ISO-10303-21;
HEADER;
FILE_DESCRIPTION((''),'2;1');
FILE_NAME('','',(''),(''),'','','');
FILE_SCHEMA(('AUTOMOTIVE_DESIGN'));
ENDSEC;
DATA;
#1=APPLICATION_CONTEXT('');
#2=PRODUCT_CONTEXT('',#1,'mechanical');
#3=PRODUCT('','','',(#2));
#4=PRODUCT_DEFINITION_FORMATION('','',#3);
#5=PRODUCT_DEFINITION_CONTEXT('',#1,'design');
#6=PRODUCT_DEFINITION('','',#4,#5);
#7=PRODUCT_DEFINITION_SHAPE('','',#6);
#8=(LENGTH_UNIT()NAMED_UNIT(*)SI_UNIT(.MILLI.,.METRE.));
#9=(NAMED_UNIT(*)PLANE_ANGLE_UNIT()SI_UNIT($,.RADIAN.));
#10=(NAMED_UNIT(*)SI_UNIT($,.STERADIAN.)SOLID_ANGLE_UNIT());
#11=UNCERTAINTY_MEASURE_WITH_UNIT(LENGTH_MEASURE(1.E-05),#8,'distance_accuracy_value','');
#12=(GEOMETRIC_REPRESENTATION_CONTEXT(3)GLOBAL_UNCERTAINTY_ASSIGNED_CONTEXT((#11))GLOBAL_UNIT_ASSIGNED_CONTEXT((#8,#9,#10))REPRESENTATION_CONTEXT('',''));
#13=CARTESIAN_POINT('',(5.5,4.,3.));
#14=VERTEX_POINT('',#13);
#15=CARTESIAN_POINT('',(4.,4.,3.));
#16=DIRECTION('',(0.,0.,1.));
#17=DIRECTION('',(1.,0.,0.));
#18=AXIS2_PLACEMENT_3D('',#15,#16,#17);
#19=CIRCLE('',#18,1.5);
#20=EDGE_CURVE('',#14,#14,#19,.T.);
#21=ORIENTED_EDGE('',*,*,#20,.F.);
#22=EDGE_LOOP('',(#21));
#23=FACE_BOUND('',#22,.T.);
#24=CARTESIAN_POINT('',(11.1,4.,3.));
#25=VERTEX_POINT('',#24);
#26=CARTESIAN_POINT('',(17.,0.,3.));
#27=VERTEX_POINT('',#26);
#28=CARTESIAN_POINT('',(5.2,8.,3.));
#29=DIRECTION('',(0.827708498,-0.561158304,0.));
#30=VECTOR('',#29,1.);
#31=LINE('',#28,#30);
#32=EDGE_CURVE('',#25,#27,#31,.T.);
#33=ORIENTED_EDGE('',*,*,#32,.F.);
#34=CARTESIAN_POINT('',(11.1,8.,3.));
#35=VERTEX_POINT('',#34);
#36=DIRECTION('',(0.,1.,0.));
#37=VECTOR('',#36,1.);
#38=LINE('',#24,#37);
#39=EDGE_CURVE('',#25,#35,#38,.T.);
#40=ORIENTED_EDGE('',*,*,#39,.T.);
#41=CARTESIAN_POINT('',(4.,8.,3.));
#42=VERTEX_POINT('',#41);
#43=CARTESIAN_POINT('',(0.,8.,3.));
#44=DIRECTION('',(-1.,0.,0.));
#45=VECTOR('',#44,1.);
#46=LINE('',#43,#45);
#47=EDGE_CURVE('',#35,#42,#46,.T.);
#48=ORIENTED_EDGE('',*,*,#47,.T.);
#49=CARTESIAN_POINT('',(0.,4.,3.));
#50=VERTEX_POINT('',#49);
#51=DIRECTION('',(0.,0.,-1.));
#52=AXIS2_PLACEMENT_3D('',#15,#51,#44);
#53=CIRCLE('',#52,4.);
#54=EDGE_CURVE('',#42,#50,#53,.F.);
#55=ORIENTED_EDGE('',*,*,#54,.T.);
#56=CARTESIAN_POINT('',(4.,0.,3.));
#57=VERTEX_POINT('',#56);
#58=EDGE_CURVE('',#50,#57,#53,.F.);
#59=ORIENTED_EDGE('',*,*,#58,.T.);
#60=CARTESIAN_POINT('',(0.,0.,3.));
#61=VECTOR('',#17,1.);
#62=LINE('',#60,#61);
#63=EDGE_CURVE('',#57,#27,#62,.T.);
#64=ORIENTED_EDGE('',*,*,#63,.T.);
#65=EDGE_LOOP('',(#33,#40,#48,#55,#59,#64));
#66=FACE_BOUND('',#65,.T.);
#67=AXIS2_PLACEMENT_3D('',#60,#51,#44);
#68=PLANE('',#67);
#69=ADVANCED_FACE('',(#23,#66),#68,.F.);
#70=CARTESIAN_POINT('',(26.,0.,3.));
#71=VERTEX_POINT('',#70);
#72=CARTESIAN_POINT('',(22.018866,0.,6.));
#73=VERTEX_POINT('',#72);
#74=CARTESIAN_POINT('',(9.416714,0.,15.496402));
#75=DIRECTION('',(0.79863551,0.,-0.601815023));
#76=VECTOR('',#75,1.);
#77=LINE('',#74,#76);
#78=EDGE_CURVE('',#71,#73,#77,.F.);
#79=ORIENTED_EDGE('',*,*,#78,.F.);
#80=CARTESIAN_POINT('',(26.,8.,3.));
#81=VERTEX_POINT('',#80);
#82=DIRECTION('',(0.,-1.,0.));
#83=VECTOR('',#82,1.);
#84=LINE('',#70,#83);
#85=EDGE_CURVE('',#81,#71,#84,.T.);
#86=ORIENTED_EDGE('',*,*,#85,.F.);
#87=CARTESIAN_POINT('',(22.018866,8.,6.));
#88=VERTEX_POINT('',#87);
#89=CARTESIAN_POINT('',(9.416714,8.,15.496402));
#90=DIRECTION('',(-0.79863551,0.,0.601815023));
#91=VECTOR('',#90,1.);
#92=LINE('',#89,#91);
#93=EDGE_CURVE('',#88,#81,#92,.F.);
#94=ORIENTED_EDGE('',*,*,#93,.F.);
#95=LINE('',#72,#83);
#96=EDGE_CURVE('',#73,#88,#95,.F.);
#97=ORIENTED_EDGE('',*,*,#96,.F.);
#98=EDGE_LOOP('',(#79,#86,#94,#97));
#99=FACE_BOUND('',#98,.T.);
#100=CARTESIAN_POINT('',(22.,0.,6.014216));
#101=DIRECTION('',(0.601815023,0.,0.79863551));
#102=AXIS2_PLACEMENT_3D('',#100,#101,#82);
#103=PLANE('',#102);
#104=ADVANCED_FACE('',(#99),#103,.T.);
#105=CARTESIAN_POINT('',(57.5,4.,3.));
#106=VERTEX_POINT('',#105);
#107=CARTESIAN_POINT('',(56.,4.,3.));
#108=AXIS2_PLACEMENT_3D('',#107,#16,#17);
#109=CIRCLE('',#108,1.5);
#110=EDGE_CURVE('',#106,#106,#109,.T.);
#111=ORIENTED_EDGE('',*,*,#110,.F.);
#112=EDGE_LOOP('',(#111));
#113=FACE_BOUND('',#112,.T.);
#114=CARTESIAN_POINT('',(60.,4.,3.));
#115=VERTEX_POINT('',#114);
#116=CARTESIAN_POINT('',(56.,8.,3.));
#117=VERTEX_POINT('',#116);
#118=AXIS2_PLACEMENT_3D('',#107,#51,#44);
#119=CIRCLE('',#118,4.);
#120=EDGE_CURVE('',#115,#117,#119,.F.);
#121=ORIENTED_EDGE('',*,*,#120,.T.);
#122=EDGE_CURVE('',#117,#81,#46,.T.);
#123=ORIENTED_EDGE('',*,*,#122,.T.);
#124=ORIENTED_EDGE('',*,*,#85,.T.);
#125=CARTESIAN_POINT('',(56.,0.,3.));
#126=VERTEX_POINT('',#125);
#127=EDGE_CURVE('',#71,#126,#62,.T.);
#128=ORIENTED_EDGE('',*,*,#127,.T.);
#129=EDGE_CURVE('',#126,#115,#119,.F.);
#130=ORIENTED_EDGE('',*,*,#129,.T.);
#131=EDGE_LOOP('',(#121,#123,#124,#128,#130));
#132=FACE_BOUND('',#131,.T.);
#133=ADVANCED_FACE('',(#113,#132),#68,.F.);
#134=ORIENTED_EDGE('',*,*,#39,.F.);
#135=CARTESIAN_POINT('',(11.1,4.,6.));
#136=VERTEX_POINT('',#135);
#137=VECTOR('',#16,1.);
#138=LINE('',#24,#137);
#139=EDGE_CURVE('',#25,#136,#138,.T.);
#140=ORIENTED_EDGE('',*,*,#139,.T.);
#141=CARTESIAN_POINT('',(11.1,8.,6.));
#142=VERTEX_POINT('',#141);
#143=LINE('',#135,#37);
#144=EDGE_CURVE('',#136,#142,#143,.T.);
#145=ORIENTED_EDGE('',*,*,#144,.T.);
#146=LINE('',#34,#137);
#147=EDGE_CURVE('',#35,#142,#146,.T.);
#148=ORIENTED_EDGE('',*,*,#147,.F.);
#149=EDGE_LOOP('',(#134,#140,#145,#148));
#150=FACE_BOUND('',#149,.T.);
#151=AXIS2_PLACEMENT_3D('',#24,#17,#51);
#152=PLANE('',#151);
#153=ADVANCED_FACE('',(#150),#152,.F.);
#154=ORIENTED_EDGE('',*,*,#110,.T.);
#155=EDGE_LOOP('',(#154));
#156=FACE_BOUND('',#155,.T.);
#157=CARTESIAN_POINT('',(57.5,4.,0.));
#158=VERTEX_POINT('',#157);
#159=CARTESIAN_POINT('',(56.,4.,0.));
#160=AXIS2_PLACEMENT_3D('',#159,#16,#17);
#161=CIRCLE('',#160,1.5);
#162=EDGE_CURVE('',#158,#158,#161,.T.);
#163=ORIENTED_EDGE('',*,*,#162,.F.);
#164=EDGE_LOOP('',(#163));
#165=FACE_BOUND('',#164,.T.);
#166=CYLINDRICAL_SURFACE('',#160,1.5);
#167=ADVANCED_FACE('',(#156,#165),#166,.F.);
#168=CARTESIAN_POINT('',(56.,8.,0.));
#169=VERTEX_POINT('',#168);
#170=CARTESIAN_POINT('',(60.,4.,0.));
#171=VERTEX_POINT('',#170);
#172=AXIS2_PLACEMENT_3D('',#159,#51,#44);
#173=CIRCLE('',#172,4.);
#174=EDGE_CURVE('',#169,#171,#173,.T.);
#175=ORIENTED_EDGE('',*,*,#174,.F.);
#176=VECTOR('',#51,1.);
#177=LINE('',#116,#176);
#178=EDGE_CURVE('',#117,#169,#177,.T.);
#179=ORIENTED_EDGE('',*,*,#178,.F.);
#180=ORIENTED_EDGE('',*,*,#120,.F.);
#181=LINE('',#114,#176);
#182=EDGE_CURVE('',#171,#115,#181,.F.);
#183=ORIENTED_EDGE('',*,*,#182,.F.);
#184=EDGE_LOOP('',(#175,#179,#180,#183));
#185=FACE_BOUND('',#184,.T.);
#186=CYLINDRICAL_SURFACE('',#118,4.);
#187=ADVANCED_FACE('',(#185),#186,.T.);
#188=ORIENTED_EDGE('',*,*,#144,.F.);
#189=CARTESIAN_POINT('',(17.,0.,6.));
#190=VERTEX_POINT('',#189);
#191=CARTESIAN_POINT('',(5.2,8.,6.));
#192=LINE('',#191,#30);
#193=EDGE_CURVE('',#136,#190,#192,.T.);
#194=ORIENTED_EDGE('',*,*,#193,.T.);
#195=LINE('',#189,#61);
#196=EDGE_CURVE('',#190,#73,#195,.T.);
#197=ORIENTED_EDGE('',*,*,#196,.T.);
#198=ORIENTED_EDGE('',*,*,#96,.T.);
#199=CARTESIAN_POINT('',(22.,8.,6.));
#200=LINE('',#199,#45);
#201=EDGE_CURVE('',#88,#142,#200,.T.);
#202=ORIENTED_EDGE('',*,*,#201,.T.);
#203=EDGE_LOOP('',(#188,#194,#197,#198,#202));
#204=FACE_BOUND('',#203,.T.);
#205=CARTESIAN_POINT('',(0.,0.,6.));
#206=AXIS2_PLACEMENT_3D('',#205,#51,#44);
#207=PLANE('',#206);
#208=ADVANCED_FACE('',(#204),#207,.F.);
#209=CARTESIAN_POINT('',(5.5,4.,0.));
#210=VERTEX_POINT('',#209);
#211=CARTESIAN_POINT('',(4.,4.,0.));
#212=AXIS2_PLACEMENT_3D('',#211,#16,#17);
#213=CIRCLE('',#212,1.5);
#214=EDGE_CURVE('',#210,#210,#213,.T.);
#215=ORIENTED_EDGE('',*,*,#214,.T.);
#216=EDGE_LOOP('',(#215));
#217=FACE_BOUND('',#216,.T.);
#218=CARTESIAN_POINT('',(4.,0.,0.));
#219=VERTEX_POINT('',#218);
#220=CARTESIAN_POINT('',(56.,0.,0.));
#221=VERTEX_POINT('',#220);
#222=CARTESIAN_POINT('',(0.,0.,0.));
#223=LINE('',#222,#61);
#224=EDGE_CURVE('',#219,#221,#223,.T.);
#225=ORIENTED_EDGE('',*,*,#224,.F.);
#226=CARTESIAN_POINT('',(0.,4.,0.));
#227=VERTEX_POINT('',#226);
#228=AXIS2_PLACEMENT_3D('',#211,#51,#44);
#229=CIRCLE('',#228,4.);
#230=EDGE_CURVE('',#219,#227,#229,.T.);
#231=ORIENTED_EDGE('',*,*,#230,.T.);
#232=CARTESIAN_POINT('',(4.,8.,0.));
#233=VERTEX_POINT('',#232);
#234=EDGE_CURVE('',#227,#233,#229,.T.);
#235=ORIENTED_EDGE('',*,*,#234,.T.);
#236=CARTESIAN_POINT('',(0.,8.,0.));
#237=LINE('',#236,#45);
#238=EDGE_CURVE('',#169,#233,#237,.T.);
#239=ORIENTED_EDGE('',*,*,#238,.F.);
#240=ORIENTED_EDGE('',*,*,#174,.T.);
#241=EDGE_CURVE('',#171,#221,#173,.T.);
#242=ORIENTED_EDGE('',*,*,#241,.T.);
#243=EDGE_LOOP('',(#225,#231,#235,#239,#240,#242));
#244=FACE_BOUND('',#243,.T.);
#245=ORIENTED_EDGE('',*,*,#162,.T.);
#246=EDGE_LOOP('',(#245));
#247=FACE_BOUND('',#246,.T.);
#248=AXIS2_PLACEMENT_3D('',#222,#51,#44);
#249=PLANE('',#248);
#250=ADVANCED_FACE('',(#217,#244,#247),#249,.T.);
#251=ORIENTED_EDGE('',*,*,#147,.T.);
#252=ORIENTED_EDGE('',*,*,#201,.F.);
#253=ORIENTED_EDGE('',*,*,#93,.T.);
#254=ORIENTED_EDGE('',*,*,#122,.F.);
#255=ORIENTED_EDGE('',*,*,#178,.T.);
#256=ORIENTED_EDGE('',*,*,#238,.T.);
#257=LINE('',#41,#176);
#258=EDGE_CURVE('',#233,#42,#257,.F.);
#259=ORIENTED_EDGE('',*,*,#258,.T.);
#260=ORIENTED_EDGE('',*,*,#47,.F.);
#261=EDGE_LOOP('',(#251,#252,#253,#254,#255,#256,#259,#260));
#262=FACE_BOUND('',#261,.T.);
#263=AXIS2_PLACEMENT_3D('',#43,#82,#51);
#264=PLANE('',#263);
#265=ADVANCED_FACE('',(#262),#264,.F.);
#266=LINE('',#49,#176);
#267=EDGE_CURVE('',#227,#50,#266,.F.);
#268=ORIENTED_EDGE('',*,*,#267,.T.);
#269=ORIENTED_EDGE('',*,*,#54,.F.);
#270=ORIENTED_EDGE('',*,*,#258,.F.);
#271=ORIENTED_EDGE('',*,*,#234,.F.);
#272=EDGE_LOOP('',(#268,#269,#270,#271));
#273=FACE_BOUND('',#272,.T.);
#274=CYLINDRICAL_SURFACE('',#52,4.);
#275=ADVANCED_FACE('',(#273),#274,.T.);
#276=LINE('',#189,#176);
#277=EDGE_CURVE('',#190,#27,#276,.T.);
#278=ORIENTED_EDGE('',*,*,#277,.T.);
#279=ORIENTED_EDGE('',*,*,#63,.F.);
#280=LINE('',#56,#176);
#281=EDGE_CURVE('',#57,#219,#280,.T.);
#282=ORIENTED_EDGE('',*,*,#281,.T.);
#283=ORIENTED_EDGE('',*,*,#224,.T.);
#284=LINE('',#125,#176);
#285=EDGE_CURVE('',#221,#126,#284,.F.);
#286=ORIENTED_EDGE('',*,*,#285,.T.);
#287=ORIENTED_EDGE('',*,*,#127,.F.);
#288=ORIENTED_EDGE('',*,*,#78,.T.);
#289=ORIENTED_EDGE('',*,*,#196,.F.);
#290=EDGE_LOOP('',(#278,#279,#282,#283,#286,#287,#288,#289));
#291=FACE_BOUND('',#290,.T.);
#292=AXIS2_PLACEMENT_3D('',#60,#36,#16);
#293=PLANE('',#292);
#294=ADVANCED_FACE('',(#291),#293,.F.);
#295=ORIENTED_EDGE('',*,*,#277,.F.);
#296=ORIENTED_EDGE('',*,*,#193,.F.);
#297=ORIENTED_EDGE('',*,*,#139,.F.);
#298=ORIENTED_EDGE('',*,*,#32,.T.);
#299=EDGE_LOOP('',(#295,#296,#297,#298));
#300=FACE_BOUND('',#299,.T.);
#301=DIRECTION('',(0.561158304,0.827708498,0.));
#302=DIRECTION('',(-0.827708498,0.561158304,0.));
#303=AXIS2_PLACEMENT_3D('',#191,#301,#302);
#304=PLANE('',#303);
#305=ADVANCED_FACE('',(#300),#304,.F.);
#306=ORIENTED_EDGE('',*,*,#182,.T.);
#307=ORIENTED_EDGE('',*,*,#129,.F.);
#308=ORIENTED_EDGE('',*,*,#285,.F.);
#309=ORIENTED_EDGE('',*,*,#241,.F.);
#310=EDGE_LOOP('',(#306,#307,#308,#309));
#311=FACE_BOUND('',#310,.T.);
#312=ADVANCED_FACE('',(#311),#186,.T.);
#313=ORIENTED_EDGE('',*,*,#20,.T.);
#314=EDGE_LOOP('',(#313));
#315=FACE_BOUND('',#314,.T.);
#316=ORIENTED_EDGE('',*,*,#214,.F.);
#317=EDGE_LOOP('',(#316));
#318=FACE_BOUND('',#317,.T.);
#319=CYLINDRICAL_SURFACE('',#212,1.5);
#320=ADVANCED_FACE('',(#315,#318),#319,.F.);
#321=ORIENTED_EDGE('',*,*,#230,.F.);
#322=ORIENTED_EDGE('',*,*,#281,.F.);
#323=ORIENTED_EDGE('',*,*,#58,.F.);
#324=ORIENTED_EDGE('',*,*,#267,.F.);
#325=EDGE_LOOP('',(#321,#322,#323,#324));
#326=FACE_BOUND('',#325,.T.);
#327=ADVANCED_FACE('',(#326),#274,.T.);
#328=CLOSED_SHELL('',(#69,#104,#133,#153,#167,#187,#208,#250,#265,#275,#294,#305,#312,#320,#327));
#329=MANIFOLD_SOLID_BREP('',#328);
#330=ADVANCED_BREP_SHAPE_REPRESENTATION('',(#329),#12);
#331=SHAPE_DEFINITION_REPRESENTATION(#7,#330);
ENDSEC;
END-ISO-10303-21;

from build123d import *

# Parameters (mm, degrees)
SZKIC1_W                    = 60
SZKIC1_H                    = 8
DODANIE_WYCI_GNI_CIE1_DEPTH = 3
ZAOKR_GLENIE1_R             = 4
SZKIC2_R                    = 1.5
WYTNIJ_WYCI_GNI_CIE1_DEPTH  = 3
DODANIE_WYCI_GNI_CIE2_DEPTH = 3
SFAZOWANIE1_SIZE            = 4
SFAZOWANIE1_SIZE_2          = 3.0142162
WYTNIJ_WYCI_GNI_CIE2_DEPTH  = 3


# Some blends are built 0.0001 mm under size
with BuildPart() as part:
    # Szkic1 → Dodanie-wyciągnięcie1 (new body)
    with BuildSketch(Plane.XY):
        with Locations((30, 4)):
            Rectangle(SZKIC1_W, SZKIC1_H)
    extrude(amount=DODANIE_WYCI_GNI_CIE1_DEPTH)

    # Zaokrąglenie1
    zaokr_glenie1_edges = [part.edges().sort_by_distance(p)[0] for p in [
        (60, 0, 1.5),
        (60, 8, 1.5),
        (0, 8, 1.5),
        (0, 0, 1.5),
    ]]
    fillet(zaokr_glenie1_edges, radius=ZAOKR_GLENIE1_R - 0.0001)  # a hair under: the kernel refuses the full size

    # Szkic2 → Wytnij-wyciągnięcie1 (cut)
    with BuildSketch(Plane.XY.offset(3)):
        with Locations((4, 4)):
            Circle(SZKIC2_R)
        with Locations((56, 4)):
            Circle(SZKIC2_R)
    extrude(amount=-WYTNIJ_WYCI_GNI_CIE1_DEPTH, mode=Mode.SUBTRACT)

    # Szkic3 → Dodanie-wyciągnięcie2 (add)
    with BuildSketch(Plane.XY.offset(3)):
        Polygon((5.2, 8), (17, 0), (22, 0), (22, 8), align=None)
    extrude(amount=DODANIE_WYCI_GNI_CIE2_DEPTH)

    # Sfazowanie1
    # the kernel refuses this chamfer: 4, 3.0142162 mm, written as the material it adds along each edge
    with BuildSketch(Plane(origin=(22, 0, 3), x_dir=(0.9997280272590686, 0, -0.023321052992758322), z_dir=(0, 1, 0))) as sfazowanie1_piece_1_section:
        Polygon((SFAZOWANIE1_SIZE * 0.999728027259, -SFAZOWANIE1_SIZE * 0.0233210529928), (-SFAZOWANIE1_SIZE_2 * 0.0233210529959, -SFAZOWANIE1_SIZE_2 * 0.999728027395), (0, 0), align=None)
    sfazowanie1_piece_1 = extrude(amount=8, mode=Mode.PRIVATE)
    sfazowanie1_piece_1 = split(sfazowanie1_piece_1, bisect_by=Plane(origin=(23.333090008, 4, 6), z_dir=(0, 0, -1)), keep=Keep.TOP, mode=Mode.PRIVATE)
    add(sfazowanie1_piece_1)

    # Szkic4 → Wytnij-wyciągnięcie2 (cut)
    with BuildSketch(Plane.XY.offset(6)):
        Polygon((5.2, 8), (11.1, 4), (11.1, 8), align=None)
    extrude(amount=-WYTNIJ_WYCI_GNI_CIE2_DEPTH, mode=Mode.SUBTRACT)


solid = part.part
